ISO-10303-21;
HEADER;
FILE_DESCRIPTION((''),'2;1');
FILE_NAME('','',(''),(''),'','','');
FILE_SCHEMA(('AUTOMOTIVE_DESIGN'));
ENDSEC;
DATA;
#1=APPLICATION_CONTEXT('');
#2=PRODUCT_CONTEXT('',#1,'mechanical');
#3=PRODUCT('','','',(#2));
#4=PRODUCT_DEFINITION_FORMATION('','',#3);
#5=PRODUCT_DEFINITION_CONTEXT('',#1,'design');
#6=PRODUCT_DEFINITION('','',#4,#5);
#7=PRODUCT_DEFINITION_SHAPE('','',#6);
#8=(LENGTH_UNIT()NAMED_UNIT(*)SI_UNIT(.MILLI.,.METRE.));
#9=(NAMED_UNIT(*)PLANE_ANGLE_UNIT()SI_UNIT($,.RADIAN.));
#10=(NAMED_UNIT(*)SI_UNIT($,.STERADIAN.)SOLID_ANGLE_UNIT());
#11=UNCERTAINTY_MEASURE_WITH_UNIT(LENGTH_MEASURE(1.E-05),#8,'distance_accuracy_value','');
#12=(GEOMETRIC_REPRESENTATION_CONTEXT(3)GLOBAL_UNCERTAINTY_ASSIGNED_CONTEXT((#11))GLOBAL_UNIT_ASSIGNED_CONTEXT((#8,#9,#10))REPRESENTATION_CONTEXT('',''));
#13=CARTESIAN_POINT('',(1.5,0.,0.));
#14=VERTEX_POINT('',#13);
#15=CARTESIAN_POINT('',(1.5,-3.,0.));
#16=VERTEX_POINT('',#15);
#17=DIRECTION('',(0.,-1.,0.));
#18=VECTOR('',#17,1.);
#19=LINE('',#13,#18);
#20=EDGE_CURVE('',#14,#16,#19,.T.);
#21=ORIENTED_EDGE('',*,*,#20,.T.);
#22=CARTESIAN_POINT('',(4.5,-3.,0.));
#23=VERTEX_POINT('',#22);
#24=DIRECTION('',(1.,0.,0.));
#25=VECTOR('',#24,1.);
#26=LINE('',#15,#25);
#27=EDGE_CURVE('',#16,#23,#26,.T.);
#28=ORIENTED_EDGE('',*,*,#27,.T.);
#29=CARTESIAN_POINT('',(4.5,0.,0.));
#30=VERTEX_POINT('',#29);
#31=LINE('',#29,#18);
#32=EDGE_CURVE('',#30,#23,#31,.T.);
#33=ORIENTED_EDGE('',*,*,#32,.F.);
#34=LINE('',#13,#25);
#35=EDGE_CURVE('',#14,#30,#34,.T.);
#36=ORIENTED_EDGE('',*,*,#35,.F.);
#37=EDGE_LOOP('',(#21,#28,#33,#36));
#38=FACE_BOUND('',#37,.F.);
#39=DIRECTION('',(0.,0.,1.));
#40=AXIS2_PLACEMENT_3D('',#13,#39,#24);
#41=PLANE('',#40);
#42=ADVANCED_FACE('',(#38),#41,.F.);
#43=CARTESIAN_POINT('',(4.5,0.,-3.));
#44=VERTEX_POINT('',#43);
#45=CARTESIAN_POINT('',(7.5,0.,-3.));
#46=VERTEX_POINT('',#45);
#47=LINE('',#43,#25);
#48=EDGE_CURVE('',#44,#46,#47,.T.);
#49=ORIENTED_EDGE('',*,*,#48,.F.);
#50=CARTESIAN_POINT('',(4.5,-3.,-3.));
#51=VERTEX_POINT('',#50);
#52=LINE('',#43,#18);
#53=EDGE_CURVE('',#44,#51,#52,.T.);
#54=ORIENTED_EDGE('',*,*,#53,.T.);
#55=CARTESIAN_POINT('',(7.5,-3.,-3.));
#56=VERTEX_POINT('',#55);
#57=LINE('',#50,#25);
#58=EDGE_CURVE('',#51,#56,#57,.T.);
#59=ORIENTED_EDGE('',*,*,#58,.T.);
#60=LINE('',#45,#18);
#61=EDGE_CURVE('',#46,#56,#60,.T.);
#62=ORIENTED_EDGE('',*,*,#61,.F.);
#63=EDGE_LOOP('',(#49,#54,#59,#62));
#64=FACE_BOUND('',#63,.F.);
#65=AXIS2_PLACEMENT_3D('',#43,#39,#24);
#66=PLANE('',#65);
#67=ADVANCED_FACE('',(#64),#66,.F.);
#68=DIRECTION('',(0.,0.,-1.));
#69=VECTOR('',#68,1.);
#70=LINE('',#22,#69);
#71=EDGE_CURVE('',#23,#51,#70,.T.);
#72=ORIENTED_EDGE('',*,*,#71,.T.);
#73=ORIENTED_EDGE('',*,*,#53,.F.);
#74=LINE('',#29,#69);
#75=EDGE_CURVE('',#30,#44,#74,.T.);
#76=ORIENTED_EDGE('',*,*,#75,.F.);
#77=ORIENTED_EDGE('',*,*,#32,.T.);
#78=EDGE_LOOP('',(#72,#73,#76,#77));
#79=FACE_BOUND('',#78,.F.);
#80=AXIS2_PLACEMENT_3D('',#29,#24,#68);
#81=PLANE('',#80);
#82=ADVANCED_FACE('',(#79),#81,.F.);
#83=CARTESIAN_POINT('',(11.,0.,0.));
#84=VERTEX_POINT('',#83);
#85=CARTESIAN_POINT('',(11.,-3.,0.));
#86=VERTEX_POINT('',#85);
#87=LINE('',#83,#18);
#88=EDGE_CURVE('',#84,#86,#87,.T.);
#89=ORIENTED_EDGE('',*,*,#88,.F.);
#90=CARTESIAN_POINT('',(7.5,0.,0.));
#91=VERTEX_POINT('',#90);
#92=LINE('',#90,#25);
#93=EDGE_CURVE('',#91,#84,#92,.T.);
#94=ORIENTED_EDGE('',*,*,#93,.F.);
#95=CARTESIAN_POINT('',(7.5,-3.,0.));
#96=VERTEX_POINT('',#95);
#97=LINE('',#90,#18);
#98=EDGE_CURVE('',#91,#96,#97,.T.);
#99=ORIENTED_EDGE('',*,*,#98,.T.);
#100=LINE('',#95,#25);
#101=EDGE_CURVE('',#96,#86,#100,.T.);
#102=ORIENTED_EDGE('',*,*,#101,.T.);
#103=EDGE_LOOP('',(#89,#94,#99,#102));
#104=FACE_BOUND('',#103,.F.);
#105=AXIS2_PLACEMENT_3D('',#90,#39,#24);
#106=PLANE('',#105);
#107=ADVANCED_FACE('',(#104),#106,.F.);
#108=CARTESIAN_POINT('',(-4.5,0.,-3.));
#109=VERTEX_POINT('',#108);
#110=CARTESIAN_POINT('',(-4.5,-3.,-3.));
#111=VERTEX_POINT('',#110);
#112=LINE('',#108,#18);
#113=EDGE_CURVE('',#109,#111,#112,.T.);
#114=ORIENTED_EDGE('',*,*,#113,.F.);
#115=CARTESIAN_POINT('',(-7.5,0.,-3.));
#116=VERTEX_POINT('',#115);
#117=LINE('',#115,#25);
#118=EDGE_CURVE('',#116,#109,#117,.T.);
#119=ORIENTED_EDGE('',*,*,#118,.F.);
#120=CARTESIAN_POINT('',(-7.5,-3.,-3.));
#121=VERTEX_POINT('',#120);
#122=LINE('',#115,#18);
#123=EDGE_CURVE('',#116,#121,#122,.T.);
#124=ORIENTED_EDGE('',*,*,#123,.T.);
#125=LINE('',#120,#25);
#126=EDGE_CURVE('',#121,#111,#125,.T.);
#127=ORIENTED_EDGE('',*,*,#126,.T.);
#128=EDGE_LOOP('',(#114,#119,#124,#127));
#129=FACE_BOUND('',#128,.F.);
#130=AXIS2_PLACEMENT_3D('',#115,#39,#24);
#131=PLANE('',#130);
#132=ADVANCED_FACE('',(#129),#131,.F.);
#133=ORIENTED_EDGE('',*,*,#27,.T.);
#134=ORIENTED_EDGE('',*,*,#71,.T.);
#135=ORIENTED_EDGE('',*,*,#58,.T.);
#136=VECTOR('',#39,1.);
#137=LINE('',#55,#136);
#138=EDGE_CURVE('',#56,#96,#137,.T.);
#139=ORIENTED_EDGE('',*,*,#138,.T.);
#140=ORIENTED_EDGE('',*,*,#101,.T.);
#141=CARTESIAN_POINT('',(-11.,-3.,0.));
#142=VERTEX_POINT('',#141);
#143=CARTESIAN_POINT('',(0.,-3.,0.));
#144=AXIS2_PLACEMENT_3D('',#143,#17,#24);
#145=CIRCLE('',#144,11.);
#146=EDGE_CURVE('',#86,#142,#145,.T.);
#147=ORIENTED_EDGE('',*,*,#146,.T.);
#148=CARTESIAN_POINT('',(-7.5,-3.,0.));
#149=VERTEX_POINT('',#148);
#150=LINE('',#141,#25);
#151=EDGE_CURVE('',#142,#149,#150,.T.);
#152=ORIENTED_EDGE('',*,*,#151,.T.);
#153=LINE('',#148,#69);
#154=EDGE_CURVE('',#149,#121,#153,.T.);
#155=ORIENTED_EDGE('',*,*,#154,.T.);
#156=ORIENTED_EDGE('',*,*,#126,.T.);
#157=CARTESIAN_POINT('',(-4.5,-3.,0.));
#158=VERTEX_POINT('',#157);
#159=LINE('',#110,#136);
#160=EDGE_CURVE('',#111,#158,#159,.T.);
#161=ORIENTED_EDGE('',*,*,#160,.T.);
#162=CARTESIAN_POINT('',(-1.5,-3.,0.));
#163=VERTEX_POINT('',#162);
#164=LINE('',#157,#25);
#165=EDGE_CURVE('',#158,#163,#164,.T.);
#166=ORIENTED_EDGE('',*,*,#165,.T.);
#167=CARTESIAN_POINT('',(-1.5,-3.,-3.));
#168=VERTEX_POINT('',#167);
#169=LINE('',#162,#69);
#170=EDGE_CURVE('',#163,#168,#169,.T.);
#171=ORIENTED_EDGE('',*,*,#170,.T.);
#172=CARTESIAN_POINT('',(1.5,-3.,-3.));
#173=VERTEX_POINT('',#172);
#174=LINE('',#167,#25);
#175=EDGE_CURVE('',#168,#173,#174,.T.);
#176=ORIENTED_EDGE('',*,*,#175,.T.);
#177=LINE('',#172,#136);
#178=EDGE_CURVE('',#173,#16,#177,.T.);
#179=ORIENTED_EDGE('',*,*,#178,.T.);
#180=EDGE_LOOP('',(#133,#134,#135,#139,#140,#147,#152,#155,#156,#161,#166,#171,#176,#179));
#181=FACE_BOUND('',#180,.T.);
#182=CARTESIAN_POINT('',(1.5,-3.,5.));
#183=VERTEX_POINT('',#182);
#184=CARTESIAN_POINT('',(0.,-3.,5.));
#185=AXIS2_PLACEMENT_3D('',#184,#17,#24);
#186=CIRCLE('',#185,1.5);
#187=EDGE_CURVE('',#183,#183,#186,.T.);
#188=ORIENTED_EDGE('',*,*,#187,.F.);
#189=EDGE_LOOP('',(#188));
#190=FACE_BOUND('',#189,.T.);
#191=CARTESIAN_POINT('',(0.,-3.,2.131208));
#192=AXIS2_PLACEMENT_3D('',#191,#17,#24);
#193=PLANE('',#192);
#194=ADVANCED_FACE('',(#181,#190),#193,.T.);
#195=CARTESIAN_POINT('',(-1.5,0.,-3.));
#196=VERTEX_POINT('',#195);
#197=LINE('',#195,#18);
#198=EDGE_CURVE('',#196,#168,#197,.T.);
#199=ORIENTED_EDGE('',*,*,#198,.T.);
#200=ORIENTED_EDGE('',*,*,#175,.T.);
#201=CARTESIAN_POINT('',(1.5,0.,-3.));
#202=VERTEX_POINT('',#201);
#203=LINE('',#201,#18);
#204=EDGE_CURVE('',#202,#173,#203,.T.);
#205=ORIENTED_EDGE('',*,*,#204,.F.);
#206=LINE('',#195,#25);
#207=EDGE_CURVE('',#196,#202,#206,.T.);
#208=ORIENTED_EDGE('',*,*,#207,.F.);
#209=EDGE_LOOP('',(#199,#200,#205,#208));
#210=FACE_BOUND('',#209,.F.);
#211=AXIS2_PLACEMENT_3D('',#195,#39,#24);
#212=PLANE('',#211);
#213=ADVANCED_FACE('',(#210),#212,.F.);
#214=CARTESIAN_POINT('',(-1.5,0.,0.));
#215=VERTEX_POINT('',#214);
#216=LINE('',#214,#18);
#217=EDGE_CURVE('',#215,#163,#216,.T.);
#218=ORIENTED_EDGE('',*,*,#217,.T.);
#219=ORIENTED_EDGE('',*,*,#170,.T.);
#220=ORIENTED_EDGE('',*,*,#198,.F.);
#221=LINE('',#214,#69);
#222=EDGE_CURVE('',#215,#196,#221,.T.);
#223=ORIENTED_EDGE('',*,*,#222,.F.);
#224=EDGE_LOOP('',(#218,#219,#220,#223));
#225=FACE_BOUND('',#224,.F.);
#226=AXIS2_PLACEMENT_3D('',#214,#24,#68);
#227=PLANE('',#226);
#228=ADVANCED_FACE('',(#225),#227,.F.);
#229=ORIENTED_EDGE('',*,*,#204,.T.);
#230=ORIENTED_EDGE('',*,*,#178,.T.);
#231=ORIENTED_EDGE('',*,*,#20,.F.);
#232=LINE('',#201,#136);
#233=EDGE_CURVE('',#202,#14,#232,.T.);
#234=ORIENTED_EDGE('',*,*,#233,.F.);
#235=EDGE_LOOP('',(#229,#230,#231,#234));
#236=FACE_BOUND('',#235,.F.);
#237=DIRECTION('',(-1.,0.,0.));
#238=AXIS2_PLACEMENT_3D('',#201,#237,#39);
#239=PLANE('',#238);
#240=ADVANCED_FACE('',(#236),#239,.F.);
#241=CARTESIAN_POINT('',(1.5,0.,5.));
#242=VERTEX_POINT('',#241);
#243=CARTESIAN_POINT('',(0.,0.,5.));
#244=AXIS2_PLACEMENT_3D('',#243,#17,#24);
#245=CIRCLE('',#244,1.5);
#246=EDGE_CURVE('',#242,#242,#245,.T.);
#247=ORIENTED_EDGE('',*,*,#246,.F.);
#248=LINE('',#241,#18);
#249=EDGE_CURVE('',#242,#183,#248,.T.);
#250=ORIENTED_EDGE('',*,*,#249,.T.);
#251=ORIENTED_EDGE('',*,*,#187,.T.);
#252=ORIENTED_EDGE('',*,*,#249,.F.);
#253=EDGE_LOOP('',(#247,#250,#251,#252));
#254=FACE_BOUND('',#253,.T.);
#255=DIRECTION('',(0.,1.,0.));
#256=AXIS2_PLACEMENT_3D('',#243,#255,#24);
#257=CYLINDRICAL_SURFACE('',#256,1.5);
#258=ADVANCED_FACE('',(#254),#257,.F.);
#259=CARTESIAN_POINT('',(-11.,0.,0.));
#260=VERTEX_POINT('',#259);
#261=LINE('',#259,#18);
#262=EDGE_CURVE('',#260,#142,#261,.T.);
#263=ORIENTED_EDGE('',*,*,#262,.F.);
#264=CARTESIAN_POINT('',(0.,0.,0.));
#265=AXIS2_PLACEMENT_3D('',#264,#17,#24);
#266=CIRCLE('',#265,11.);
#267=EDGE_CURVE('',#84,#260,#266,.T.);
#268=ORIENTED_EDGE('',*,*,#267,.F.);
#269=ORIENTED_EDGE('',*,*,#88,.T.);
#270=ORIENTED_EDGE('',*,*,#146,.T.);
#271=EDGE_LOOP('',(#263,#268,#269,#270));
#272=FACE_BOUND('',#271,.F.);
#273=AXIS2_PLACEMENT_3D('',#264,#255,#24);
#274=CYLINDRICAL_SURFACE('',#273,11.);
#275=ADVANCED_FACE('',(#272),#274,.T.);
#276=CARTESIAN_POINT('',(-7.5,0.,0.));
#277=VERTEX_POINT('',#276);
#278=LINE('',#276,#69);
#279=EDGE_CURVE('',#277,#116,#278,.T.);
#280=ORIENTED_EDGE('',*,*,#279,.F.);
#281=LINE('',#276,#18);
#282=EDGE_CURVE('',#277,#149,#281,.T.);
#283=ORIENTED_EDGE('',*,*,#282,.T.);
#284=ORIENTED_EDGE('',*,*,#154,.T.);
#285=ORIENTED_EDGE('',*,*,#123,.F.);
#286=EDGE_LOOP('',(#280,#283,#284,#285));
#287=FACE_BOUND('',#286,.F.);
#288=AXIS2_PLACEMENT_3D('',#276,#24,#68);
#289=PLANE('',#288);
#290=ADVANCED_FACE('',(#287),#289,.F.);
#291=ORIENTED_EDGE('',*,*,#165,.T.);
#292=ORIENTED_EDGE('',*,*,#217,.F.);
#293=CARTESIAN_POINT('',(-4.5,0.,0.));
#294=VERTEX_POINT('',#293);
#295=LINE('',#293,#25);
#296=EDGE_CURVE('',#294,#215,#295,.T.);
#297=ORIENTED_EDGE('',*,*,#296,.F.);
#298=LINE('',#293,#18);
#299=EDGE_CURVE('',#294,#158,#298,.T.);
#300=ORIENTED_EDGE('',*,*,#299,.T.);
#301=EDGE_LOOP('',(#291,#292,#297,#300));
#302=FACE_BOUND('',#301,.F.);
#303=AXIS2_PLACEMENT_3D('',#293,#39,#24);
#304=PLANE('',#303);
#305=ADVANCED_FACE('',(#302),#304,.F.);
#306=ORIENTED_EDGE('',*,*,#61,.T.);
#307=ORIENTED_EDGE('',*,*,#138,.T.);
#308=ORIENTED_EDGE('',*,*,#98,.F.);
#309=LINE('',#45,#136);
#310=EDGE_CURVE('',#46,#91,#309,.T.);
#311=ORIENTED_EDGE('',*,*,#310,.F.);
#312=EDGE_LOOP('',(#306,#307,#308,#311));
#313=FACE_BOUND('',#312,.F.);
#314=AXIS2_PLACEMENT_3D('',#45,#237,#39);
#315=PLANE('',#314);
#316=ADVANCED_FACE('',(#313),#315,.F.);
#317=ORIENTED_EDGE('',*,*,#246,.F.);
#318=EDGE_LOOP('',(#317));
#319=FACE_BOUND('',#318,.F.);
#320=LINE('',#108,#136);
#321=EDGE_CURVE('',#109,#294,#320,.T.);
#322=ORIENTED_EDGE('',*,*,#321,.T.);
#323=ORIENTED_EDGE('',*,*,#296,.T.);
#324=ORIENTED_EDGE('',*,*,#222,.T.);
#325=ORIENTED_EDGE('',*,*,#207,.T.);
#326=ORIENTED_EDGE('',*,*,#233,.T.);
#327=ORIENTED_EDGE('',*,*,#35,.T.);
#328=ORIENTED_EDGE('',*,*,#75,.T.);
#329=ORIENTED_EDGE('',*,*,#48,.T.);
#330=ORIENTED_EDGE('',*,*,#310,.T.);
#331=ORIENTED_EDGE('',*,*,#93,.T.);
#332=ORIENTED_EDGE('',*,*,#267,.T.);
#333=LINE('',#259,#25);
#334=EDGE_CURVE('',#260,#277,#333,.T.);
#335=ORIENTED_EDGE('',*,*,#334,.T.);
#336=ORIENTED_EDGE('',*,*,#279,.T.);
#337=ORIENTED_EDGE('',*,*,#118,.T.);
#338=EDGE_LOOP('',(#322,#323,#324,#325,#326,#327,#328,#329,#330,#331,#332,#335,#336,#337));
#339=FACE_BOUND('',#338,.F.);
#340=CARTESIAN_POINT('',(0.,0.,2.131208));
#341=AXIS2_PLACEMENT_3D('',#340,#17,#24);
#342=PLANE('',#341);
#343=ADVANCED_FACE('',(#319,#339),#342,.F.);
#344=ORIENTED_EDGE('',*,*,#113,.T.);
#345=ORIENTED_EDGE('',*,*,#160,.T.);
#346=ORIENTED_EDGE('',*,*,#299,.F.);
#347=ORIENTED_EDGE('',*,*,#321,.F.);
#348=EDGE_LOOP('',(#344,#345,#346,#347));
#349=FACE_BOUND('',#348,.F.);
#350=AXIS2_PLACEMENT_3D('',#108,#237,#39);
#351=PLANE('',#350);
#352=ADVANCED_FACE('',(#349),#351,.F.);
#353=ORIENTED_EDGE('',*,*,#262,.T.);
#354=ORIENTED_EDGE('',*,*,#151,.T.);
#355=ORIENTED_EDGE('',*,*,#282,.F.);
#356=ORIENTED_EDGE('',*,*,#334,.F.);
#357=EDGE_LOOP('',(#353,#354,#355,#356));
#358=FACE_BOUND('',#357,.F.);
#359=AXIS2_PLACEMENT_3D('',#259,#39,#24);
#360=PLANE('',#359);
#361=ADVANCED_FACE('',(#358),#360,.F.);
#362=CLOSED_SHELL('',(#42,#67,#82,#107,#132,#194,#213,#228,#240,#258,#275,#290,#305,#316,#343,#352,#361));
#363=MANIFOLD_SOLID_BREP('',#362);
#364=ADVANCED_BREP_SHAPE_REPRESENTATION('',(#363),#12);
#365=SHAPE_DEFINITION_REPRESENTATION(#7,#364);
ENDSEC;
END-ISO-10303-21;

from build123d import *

# Parameters (mm, degrees)
F0_R     = 1.5
F1_DEPTH = 3


# Not quite as in the source:
# - a feature names something its author has since deleted; it is built from what else it names


with BuildPart() as f1:
    # F0 (on Front) → F1 (new body)
    with BuildSketch(Plane.XZ):
        with BuildLine():
            Line((7.5, 0), (11, 0))
            ThreePointArc((11, 0), (0, 11), (-11, 0))
            Line((-11, 0), (-7.5, 0))
            Line((-7.5, 0), (-7.5, -3))
            Line((-7.5, -3), (-4.5, -3))
            Line((-4.5, -3), (-4.5, 0))
            Line((-4.5, 0), (-1.5, 0))
            Line((-1.5, 0), (-1.5, -3))
            Line((-1.5, -3), (1.5, -3))
            Line((1.5, -3), (1.5, 0))
            Line((1.5, 0), (4.5, 0))
            Line((4.5, 0), (4.5, -3))
            Line((4.5, -3), (7.5, -3))
            Line((7.5, -3), (7.5, 0))
        make_face()
        with Locations((0, 5)):
            Circle(F0_R, mode=Mode.SUBTRACT)
    extrude(amount=F1_DEPTH)


solid = f1.part
